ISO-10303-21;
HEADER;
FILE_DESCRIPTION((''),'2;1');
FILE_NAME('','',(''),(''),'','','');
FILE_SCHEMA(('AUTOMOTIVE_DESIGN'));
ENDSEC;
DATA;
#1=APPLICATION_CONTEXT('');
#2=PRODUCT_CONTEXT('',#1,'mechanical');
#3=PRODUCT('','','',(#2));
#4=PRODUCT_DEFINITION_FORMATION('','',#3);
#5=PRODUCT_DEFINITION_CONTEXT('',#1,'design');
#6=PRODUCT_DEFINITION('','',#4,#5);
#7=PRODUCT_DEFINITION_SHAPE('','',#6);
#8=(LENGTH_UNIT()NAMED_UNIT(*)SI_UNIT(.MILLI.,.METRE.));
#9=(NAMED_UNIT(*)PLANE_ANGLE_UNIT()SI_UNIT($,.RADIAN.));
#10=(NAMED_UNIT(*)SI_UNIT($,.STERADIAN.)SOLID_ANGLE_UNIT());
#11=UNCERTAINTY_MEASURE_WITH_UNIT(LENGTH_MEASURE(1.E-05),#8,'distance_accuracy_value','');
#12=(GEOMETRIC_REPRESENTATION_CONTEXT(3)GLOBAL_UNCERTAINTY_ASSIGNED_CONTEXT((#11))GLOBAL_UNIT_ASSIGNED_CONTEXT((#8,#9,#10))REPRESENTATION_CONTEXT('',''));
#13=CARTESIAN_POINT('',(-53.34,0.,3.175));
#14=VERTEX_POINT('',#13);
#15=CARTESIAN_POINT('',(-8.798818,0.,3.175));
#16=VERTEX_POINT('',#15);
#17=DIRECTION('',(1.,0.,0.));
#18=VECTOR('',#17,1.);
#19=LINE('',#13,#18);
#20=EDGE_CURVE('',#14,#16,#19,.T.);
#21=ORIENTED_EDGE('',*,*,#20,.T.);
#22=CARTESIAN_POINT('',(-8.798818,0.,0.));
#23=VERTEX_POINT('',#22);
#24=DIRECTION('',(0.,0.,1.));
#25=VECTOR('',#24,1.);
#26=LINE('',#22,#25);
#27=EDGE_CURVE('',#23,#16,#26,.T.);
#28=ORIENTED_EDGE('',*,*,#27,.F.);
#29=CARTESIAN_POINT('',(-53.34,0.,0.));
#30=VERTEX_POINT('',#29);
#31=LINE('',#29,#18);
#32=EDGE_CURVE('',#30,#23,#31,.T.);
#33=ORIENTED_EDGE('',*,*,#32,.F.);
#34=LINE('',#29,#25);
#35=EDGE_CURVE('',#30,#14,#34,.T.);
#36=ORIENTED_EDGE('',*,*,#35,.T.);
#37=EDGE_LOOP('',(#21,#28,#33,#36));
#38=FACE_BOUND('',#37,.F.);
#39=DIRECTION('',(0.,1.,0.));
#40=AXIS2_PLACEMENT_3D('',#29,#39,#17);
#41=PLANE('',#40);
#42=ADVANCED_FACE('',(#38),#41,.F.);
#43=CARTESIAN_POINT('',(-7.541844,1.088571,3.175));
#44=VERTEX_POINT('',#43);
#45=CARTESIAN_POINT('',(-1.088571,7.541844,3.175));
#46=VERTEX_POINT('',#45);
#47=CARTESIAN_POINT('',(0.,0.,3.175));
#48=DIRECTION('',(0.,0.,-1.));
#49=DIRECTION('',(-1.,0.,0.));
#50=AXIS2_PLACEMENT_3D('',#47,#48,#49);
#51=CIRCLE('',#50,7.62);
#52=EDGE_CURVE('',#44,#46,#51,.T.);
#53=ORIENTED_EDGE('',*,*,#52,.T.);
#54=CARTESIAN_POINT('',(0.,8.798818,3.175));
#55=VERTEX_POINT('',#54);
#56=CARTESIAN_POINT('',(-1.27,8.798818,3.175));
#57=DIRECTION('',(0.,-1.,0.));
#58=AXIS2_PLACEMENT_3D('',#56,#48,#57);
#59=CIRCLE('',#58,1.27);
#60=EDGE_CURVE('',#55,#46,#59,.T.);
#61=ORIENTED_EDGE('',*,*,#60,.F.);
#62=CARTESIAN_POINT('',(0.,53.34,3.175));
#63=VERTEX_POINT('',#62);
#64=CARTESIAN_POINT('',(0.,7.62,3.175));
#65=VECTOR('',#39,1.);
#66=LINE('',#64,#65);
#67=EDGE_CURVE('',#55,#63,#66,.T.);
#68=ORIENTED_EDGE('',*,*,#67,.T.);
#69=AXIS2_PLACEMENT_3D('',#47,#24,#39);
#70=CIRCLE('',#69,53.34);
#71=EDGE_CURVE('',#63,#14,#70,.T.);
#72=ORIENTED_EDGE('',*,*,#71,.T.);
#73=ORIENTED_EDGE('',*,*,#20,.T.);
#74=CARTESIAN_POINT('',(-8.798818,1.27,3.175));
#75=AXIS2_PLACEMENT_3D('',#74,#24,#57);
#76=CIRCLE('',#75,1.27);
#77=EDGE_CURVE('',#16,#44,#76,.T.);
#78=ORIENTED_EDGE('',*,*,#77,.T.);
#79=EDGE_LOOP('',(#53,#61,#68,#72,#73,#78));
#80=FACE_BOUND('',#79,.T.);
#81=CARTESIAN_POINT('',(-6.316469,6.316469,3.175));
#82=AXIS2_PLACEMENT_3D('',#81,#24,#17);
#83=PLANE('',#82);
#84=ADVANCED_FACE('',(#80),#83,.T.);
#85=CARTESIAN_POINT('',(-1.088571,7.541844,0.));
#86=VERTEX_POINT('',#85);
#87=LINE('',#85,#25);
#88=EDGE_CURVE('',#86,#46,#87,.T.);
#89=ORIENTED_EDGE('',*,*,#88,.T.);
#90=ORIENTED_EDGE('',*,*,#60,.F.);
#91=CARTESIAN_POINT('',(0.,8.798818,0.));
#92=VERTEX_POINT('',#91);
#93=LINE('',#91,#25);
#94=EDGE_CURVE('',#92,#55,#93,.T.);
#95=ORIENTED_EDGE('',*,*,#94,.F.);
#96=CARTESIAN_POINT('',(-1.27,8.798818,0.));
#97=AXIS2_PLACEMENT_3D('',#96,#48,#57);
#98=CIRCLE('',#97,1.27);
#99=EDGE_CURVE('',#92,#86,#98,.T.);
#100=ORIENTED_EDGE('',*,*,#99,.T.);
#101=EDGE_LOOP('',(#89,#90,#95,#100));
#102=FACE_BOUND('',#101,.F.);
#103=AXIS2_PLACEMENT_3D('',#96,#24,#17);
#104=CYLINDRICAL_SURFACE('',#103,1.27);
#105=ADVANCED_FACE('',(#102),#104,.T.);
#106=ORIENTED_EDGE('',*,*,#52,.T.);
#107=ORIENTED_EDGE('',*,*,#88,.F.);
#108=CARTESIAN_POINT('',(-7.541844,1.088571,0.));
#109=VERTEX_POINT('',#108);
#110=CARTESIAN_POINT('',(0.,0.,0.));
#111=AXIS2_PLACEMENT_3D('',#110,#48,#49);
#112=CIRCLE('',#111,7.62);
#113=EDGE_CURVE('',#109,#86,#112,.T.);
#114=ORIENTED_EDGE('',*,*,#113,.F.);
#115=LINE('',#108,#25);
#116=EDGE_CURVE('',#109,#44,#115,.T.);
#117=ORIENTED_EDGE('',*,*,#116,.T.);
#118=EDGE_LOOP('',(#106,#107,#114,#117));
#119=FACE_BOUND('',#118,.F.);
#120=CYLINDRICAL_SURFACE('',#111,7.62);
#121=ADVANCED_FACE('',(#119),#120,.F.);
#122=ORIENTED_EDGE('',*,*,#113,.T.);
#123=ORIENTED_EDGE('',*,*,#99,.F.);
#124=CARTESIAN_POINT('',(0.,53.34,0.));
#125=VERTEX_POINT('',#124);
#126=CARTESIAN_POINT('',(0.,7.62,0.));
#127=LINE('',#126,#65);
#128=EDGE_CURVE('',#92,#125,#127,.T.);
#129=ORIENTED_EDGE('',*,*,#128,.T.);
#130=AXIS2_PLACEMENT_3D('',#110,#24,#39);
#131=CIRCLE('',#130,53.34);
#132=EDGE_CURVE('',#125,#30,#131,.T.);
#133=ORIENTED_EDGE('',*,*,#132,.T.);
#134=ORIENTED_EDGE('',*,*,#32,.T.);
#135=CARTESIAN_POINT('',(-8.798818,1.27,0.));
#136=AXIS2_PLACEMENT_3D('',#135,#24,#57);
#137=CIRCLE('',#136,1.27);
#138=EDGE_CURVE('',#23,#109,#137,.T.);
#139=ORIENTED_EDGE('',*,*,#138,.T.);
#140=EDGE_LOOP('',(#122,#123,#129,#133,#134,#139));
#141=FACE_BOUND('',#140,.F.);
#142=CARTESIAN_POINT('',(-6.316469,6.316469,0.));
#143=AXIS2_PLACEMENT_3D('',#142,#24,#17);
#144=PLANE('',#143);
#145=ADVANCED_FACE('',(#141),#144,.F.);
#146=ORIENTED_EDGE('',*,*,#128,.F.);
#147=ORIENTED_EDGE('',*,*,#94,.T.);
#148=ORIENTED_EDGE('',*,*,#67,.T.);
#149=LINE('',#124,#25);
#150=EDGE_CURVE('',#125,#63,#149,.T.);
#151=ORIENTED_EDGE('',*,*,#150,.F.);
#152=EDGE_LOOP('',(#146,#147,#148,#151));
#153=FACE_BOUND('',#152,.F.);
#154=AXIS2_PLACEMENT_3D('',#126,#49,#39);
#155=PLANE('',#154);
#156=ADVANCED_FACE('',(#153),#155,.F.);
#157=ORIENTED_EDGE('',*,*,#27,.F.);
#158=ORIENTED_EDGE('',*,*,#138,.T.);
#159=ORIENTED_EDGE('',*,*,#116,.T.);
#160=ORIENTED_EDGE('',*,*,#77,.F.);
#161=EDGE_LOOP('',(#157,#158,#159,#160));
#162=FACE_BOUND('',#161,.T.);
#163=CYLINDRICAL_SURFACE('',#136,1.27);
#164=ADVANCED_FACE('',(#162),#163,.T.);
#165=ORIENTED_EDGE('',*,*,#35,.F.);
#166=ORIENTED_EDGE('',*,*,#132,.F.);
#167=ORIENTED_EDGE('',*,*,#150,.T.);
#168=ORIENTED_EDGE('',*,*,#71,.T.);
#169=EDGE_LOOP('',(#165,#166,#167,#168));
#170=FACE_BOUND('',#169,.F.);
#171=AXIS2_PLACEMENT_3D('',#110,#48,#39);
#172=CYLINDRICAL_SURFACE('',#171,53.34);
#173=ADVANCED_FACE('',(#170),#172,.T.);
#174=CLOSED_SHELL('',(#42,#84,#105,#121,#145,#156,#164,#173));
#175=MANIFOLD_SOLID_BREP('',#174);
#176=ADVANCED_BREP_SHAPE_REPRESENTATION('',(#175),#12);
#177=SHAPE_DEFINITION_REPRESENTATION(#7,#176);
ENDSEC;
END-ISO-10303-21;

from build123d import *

# Parameters (mm, degrees)
F1_DEPTH = 3.175
F2_R     = 1.27


# Not quite as in the source:
# - a feature names something its author has since deleted; it is built from what else it names


with BuildPart() as f1:
    # F0 (on Top) → F1 (new body)
    with BuildSketch(Plane.XY):
        with BuildLine():
            Line((0, 7.62), (0, 12.7))
            ThreePointArc((0, 12.7), (-8.9802561211, 8.9802561211), (-12.7, 0))
            Line((-12.7, 0), (-7.62, 0))
            ThreePointArc((-7.62, 0), (-5.3881536726, 5.3881536726), (0, 7.62))
        make_face()
        with BuildLine():
            ThreePointArc((-12.7, 0), (-8.9802561211, 8.9802561211), (0, 12.7))
            Line((0, 12.7), (0, 48.26))
            ThreePointArc((0, 48.26), (-34.1249732601, 34.1249732601), (-48.26, 0))
            Line((-48.26, 0), (-12.7, 0))
        make_face()
        with BuildLine():
            ThreePointArc((-48.26, 0), (-34.1249732601, 34.1249732601), (0, 48.26))
            Line((0, 48.26), (0, 53.34))
            ThreePointArc((0, 53.34), (-37.7170757085, 37.7170757085), (-53.34, 0))
            Line((-53.34, 0), (-48.26, 0))
        make_face()
    extrude(amount=F1_DEPTH)

    # F2
    f2_edges = [f1.edges().sort_by_distance(p)[0] for p in [
        (-7.62, 0, 1.5875),
        (0, 7.62, 1.5875),
    ]]
    fillet(f2_edges, radius=F2_R)


solid = f1.part
